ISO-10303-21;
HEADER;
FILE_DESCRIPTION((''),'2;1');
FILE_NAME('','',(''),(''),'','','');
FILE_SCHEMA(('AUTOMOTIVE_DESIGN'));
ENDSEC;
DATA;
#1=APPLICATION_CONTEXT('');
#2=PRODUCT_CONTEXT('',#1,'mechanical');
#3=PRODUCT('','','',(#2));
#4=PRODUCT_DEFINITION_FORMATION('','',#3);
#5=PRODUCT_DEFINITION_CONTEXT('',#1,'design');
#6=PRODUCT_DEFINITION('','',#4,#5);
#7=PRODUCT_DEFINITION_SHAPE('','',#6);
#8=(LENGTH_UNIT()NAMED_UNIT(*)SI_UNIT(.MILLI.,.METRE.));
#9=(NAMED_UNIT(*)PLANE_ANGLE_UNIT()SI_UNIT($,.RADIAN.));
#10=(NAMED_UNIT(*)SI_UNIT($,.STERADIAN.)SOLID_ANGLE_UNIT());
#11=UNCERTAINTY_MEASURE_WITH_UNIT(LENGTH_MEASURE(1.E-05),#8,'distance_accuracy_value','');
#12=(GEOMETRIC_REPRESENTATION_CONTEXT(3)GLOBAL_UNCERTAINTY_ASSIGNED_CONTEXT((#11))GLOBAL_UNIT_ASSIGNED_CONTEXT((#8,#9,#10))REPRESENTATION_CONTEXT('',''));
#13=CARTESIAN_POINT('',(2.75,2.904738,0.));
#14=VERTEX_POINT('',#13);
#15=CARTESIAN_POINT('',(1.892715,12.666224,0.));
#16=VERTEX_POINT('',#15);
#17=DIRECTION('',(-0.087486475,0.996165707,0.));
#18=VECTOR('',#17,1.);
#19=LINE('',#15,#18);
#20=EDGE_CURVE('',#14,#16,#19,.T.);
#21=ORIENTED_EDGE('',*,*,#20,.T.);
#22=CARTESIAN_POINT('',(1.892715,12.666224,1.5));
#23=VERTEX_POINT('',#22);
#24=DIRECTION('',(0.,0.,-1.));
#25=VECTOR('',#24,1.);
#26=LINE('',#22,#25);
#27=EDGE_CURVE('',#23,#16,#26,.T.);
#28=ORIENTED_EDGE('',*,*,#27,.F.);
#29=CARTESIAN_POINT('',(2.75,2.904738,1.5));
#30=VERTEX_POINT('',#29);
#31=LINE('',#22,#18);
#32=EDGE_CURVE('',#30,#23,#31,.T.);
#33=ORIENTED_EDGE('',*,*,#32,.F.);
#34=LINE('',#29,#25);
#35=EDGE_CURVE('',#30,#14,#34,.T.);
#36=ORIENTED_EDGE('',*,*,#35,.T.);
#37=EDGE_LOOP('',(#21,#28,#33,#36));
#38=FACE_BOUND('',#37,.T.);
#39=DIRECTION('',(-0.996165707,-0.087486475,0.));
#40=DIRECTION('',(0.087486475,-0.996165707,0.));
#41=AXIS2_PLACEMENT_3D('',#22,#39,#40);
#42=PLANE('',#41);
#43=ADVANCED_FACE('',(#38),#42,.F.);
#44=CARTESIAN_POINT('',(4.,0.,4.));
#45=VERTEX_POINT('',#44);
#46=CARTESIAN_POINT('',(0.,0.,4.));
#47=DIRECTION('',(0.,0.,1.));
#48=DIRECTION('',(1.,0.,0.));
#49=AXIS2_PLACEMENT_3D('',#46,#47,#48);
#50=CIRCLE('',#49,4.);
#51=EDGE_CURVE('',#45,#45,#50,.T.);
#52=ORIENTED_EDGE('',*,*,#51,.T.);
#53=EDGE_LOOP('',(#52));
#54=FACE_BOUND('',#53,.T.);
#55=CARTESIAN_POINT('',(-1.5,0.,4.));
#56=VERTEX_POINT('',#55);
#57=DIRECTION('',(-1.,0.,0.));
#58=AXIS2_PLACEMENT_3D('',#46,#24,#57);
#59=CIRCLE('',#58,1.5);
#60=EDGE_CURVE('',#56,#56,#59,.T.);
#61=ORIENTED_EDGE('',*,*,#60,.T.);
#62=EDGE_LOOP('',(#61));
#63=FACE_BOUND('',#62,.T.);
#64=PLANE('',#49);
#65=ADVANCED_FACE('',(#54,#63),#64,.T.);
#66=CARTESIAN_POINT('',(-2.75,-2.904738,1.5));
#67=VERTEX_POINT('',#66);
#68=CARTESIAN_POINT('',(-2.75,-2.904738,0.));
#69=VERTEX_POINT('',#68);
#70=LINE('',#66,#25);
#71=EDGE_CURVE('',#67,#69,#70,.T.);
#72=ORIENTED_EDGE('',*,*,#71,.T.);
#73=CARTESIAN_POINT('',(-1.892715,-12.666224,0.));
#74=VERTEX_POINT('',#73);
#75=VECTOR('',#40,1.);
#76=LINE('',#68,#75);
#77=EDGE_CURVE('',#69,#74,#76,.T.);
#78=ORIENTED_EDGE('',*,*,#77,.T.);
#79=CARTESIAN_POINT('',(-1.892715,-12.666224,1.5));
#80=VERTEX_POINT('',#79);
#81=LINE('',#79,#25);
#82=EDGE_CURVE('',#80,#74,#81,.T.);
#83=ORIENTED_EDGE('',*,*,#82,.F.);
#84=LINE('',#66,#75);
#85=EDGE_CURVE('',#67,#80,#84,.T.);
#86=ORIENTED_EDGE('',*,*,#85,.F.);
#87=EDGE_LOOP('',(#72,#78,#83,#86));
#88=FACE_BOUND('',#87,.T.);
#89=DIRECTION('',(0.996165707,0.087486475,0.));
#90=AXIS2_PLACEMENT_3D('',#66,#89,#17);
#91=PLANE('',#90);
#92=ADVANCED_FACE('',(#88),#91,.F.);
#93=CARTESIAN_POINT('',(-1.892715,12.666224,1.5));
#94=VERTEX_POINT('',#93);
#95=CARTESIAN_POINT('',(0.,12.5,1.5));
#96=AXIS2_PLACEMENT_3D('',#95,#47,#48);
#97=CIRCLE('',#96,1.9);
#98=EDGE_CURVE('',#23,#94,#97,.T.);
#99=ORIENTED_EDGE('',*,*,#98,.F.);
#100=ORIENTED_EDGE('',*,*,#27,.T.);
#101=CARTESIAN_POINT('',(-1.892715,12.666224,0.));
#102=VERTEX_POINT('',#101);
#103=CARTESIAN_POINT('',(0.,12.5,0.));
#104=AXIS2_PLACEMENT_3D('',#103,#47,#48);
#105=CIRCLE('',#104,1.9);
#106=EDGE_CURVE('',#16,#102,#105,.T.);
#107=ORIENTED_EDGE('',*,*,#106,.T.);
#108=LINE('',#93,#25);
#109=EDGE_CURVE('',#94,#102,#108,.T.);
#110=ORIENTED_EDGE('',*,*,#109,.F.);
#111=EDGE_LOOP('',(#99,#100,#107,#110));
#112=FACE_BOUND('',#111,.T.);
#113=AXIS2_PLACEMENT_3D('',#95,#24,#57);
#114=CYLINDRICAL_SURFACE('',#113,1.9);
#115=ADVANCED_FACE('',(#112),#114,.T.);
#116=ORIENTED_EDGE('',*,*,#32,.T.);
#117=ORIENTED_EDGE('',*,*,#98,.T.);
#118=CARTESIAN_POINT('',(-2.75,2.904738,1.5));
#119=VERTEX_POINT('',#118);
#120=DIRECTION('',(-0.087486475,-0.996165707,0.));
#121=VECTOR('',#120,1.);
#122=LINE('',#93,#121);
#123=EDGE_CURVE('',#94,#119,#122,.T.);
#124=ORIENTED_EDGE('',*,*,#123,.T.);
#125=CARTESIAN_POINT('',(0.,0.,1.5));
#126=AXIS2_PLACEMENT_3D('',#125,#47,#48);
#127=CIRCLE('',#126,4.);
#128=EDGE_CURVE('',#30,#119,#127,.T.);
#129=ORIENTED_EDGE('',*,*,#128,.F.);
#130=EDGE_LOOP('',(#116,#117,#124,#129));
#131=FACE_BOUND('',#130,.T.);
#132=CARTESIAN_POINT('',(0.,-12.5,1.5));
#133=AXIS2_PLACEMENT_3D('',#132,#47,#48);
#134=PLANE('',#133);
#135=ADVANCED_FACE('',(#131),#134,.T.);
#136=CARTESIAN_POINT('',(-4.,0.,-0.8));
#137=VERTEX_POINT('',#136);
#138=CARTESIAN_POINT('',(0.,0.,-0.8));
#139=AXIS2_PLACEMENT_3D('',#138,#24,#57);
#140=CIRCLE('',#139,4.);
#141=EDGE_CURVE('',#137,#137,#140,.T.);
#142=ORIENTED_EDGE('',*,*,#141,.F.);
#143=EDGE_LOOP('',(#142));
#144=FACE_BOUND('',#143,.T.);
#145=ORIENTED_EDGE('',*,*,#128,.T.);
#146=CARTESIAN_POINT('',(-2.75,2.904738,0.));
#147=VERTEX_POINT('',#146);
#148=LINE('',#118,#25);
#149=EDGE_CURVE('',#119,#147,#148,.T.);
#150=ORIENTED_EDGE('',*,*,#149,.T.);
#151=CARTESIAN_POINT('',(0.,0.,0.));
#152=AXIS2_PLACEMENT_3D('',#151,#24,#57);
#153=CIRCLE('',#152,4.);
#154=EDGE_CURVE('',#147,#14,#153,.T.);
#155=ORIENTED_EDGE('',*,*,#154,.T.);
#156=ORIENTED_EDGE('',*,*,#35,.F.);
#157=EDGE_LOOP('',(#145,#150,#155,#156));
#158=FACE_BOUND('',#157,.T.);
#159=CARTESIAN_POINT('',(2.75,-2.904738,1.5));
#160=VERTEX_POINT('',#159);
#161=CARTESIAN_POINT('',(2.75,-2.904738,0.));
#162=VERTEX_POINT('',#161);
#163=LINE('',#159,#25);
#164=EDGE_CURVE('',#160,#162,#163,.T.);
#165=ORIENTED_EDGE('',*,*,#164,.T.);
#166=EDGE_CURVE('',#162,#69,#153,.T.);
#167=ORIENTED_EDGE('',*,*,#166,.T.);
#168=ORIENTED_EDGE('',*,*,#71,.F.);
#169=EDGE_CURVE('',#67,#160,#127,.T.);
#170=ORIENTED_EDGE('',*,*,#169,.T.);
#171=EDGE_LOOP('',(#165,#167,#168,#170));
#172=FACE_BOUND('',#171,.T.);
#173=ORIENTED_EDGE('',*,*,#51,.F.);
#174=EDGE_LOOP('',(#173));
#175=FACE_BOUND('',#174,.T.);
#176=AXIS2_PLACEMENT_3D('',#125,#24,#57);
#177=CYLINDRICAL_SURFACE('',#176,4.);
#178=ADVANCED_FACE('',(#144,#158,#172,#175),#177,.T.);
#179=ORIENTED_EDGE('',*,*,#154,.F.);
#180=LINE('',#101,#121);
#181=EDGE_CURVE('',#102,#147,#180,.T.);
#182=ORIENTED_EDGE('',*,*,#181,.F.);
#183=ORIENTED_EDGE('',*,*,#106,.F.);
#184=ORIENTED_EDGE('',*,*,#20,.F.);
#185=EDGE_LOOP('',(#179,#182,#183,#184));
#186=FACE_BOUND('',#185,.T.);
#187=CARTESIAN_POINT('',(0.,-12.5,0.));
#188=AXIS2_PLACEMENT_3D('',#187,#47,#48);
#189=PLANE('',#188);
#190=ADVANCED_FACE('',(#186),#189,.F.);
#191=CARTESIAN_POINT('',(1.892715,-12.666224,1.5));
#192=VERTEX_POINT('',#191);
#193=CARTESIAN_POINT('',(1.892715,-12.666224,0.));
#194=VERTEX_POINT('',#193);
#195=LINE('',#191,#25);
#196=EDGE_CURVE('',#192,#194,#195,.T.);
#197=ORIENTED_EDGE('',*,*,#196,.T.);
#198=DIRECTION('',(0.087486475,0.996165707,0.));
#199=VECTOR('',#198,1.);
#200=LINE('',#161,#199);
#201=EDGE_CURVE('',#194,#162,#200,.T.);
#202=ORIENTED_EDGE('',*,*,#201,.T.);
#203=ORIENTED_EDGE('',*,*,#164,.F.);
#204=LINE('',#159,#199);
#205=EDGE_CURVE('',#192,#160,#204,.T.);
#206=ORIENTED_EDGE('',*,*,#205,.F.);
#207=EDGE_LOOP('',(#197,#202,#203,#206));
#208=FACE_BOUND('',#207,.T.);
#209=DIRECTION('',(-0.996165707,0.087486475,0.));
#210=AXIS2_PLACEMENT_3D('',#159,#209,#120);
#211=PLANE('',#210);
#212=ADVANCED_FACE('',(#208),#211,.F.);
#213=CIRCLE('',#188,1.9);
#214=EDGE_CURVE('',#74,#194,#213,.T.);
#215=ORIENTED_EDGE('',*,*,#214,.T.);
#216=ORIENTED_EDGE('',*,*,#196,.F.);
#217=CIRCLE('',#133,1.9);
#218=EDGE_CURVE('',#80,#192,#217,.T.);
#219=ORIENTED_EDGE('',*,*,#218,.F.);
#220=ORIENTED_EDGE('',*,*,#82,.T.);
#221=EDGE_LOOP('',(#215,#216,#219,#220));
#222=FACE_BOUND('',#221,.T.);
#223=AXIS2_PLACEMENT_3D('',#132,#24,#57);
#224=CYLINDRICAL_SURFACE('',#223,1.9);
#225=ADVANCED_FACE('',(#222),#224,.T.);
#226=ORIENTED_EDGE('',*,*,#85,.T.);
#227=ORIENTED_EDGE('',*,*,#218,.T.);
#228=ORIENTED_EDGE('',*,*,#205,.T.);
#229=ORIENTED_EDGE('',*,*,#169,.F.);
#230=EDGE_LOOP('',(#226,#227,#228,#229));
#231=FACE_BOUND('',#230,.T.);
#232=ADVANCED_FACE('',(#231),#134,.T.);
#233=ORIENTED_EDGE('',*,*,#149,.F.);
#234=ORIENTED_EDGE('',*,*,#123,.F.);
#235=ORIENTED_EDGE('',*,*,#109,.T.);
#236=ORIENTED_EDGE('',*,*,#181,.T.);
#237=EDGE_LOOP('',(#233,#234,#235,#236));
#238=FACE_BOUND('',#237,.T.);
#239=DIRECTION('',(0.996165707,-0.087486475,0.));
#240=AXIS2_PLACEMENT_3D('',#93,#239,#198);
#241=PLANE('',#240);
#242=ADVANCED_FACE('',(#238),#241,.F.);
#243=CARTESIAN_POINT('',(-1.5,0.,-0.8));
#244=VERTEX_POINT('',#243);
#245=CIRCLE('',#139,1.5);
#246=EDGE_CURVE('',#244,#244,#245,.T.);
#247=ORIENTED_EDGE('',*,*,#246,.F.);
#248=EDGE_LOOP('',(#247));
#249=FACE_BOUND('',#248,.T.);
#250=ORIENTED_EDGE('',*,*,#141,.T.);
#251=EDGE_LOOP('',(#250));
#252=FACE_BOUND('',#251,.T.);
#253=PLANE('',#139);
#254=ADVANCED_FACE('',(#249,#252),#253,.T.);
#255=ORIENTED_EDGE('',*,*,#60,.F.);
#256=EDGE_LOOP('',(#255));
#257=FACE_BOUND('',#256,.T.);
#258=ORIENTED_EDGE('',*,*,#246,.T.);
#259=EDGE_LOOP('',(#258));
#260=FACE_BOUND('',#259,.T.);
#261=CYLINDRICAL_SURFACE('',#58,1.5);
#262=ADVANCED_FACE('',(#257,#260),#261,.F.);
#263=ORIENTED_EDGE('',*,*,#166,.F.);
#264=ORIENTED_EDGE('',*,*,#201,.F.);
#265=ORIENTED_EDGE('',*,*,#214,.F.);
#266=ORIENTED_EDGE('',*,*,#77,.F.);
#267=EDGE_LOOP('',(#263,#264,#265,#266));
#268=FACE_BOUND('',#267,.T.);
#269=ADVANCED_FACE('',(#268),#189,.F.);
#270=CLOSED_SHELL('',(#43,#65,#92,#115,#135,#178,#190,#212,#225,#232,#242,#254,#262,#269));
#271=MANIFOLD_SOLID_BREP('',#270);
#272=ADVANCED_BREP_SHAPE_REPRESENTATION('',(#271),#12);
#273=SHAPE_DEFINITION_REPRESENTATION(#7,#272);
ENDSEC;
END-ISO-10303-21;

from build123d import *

# Parameters (mm, degrees)
BOSS_EXTRUDE1_DEPTH = 1.5
SKETCH2_R           = 4
BOSS_EXTRUDE2_DEPTH = 2.5
BOSS_EXTRUDE3_START = 0.8
SKETCH3_R           = 4
BOSS_EXTRUDE3_DEPTH = 0.8
SKETCH4_R           = 1.5
CUT_EXTRUDE1_DEPTH  = 16.697133496


with BuildPart() as part:
    # Sketch1 → Boss-Extrude1 (new body)
    with BuildSketch(Plane.XY):
        with BuildLine():
            Line((-1.892714844, 12.666224303), (-2.75, 2.90473751))
            ThreePointArc((-2.75, 2.90473751), (-4, 0), (-2.75, -2.90473751))
            Line((-2.75, -2.90473751), (-1.892714844, -12.666224303))
            ThreePointArc((-1.892714844, -12.666224303), (0, -14.4), (1.892714844, -12.666224303))
            Line((1.892714844, -12.666224303), (2.75, -2.90473751))
            ThreePointArc((2.75, -2.90473751), (4, 0), (2.75, 2.90473751))
            Line((2.75, 2.90473751), (1.892714844, 12.666224303))
            ThreePointArc((1.892714844, 12.666224303), (0, 14.4), (-1.892714844, 12.666224303))
        make_face()
    extrude(amount=BOSS_EXTRUDE1_DEPTH)

    # Sketch2 → Boss-Extrude2 (add)
    with BuildSketch(Plane.XY.offset(1.5)):
        Circle(SKETCH2_R)
    extrude(amount=BOSS_EXTRUDE2_DEPTH)

    # Sketch3 → Boss-Extrude3 (add)
    with BuildSketch(Plane(origin=(0, 0, 0), x_dir=(-1, 0, 0), z_dir=(0, 0, -1)).offset(BOSS_EXTRUDE3_START)):
        Circle(SKETCH3_R)
    extrude(amount=-BOSS_EXTRUDE3_DEPTH)

    # Sketch4 → Cut-Extrude1 (cut, through all)
    with BuildSketch(Plane(origin=(0, 0, -0.8), x_dir=(-1, 0, 0), z_dir=(0, 0, -1))):
        Circle(SKETCH4_R)
    extrude(amount=-CUT_EXTRUDE1_DEPTH, mode=Mode.SUBTRACT)


solid = part.part
